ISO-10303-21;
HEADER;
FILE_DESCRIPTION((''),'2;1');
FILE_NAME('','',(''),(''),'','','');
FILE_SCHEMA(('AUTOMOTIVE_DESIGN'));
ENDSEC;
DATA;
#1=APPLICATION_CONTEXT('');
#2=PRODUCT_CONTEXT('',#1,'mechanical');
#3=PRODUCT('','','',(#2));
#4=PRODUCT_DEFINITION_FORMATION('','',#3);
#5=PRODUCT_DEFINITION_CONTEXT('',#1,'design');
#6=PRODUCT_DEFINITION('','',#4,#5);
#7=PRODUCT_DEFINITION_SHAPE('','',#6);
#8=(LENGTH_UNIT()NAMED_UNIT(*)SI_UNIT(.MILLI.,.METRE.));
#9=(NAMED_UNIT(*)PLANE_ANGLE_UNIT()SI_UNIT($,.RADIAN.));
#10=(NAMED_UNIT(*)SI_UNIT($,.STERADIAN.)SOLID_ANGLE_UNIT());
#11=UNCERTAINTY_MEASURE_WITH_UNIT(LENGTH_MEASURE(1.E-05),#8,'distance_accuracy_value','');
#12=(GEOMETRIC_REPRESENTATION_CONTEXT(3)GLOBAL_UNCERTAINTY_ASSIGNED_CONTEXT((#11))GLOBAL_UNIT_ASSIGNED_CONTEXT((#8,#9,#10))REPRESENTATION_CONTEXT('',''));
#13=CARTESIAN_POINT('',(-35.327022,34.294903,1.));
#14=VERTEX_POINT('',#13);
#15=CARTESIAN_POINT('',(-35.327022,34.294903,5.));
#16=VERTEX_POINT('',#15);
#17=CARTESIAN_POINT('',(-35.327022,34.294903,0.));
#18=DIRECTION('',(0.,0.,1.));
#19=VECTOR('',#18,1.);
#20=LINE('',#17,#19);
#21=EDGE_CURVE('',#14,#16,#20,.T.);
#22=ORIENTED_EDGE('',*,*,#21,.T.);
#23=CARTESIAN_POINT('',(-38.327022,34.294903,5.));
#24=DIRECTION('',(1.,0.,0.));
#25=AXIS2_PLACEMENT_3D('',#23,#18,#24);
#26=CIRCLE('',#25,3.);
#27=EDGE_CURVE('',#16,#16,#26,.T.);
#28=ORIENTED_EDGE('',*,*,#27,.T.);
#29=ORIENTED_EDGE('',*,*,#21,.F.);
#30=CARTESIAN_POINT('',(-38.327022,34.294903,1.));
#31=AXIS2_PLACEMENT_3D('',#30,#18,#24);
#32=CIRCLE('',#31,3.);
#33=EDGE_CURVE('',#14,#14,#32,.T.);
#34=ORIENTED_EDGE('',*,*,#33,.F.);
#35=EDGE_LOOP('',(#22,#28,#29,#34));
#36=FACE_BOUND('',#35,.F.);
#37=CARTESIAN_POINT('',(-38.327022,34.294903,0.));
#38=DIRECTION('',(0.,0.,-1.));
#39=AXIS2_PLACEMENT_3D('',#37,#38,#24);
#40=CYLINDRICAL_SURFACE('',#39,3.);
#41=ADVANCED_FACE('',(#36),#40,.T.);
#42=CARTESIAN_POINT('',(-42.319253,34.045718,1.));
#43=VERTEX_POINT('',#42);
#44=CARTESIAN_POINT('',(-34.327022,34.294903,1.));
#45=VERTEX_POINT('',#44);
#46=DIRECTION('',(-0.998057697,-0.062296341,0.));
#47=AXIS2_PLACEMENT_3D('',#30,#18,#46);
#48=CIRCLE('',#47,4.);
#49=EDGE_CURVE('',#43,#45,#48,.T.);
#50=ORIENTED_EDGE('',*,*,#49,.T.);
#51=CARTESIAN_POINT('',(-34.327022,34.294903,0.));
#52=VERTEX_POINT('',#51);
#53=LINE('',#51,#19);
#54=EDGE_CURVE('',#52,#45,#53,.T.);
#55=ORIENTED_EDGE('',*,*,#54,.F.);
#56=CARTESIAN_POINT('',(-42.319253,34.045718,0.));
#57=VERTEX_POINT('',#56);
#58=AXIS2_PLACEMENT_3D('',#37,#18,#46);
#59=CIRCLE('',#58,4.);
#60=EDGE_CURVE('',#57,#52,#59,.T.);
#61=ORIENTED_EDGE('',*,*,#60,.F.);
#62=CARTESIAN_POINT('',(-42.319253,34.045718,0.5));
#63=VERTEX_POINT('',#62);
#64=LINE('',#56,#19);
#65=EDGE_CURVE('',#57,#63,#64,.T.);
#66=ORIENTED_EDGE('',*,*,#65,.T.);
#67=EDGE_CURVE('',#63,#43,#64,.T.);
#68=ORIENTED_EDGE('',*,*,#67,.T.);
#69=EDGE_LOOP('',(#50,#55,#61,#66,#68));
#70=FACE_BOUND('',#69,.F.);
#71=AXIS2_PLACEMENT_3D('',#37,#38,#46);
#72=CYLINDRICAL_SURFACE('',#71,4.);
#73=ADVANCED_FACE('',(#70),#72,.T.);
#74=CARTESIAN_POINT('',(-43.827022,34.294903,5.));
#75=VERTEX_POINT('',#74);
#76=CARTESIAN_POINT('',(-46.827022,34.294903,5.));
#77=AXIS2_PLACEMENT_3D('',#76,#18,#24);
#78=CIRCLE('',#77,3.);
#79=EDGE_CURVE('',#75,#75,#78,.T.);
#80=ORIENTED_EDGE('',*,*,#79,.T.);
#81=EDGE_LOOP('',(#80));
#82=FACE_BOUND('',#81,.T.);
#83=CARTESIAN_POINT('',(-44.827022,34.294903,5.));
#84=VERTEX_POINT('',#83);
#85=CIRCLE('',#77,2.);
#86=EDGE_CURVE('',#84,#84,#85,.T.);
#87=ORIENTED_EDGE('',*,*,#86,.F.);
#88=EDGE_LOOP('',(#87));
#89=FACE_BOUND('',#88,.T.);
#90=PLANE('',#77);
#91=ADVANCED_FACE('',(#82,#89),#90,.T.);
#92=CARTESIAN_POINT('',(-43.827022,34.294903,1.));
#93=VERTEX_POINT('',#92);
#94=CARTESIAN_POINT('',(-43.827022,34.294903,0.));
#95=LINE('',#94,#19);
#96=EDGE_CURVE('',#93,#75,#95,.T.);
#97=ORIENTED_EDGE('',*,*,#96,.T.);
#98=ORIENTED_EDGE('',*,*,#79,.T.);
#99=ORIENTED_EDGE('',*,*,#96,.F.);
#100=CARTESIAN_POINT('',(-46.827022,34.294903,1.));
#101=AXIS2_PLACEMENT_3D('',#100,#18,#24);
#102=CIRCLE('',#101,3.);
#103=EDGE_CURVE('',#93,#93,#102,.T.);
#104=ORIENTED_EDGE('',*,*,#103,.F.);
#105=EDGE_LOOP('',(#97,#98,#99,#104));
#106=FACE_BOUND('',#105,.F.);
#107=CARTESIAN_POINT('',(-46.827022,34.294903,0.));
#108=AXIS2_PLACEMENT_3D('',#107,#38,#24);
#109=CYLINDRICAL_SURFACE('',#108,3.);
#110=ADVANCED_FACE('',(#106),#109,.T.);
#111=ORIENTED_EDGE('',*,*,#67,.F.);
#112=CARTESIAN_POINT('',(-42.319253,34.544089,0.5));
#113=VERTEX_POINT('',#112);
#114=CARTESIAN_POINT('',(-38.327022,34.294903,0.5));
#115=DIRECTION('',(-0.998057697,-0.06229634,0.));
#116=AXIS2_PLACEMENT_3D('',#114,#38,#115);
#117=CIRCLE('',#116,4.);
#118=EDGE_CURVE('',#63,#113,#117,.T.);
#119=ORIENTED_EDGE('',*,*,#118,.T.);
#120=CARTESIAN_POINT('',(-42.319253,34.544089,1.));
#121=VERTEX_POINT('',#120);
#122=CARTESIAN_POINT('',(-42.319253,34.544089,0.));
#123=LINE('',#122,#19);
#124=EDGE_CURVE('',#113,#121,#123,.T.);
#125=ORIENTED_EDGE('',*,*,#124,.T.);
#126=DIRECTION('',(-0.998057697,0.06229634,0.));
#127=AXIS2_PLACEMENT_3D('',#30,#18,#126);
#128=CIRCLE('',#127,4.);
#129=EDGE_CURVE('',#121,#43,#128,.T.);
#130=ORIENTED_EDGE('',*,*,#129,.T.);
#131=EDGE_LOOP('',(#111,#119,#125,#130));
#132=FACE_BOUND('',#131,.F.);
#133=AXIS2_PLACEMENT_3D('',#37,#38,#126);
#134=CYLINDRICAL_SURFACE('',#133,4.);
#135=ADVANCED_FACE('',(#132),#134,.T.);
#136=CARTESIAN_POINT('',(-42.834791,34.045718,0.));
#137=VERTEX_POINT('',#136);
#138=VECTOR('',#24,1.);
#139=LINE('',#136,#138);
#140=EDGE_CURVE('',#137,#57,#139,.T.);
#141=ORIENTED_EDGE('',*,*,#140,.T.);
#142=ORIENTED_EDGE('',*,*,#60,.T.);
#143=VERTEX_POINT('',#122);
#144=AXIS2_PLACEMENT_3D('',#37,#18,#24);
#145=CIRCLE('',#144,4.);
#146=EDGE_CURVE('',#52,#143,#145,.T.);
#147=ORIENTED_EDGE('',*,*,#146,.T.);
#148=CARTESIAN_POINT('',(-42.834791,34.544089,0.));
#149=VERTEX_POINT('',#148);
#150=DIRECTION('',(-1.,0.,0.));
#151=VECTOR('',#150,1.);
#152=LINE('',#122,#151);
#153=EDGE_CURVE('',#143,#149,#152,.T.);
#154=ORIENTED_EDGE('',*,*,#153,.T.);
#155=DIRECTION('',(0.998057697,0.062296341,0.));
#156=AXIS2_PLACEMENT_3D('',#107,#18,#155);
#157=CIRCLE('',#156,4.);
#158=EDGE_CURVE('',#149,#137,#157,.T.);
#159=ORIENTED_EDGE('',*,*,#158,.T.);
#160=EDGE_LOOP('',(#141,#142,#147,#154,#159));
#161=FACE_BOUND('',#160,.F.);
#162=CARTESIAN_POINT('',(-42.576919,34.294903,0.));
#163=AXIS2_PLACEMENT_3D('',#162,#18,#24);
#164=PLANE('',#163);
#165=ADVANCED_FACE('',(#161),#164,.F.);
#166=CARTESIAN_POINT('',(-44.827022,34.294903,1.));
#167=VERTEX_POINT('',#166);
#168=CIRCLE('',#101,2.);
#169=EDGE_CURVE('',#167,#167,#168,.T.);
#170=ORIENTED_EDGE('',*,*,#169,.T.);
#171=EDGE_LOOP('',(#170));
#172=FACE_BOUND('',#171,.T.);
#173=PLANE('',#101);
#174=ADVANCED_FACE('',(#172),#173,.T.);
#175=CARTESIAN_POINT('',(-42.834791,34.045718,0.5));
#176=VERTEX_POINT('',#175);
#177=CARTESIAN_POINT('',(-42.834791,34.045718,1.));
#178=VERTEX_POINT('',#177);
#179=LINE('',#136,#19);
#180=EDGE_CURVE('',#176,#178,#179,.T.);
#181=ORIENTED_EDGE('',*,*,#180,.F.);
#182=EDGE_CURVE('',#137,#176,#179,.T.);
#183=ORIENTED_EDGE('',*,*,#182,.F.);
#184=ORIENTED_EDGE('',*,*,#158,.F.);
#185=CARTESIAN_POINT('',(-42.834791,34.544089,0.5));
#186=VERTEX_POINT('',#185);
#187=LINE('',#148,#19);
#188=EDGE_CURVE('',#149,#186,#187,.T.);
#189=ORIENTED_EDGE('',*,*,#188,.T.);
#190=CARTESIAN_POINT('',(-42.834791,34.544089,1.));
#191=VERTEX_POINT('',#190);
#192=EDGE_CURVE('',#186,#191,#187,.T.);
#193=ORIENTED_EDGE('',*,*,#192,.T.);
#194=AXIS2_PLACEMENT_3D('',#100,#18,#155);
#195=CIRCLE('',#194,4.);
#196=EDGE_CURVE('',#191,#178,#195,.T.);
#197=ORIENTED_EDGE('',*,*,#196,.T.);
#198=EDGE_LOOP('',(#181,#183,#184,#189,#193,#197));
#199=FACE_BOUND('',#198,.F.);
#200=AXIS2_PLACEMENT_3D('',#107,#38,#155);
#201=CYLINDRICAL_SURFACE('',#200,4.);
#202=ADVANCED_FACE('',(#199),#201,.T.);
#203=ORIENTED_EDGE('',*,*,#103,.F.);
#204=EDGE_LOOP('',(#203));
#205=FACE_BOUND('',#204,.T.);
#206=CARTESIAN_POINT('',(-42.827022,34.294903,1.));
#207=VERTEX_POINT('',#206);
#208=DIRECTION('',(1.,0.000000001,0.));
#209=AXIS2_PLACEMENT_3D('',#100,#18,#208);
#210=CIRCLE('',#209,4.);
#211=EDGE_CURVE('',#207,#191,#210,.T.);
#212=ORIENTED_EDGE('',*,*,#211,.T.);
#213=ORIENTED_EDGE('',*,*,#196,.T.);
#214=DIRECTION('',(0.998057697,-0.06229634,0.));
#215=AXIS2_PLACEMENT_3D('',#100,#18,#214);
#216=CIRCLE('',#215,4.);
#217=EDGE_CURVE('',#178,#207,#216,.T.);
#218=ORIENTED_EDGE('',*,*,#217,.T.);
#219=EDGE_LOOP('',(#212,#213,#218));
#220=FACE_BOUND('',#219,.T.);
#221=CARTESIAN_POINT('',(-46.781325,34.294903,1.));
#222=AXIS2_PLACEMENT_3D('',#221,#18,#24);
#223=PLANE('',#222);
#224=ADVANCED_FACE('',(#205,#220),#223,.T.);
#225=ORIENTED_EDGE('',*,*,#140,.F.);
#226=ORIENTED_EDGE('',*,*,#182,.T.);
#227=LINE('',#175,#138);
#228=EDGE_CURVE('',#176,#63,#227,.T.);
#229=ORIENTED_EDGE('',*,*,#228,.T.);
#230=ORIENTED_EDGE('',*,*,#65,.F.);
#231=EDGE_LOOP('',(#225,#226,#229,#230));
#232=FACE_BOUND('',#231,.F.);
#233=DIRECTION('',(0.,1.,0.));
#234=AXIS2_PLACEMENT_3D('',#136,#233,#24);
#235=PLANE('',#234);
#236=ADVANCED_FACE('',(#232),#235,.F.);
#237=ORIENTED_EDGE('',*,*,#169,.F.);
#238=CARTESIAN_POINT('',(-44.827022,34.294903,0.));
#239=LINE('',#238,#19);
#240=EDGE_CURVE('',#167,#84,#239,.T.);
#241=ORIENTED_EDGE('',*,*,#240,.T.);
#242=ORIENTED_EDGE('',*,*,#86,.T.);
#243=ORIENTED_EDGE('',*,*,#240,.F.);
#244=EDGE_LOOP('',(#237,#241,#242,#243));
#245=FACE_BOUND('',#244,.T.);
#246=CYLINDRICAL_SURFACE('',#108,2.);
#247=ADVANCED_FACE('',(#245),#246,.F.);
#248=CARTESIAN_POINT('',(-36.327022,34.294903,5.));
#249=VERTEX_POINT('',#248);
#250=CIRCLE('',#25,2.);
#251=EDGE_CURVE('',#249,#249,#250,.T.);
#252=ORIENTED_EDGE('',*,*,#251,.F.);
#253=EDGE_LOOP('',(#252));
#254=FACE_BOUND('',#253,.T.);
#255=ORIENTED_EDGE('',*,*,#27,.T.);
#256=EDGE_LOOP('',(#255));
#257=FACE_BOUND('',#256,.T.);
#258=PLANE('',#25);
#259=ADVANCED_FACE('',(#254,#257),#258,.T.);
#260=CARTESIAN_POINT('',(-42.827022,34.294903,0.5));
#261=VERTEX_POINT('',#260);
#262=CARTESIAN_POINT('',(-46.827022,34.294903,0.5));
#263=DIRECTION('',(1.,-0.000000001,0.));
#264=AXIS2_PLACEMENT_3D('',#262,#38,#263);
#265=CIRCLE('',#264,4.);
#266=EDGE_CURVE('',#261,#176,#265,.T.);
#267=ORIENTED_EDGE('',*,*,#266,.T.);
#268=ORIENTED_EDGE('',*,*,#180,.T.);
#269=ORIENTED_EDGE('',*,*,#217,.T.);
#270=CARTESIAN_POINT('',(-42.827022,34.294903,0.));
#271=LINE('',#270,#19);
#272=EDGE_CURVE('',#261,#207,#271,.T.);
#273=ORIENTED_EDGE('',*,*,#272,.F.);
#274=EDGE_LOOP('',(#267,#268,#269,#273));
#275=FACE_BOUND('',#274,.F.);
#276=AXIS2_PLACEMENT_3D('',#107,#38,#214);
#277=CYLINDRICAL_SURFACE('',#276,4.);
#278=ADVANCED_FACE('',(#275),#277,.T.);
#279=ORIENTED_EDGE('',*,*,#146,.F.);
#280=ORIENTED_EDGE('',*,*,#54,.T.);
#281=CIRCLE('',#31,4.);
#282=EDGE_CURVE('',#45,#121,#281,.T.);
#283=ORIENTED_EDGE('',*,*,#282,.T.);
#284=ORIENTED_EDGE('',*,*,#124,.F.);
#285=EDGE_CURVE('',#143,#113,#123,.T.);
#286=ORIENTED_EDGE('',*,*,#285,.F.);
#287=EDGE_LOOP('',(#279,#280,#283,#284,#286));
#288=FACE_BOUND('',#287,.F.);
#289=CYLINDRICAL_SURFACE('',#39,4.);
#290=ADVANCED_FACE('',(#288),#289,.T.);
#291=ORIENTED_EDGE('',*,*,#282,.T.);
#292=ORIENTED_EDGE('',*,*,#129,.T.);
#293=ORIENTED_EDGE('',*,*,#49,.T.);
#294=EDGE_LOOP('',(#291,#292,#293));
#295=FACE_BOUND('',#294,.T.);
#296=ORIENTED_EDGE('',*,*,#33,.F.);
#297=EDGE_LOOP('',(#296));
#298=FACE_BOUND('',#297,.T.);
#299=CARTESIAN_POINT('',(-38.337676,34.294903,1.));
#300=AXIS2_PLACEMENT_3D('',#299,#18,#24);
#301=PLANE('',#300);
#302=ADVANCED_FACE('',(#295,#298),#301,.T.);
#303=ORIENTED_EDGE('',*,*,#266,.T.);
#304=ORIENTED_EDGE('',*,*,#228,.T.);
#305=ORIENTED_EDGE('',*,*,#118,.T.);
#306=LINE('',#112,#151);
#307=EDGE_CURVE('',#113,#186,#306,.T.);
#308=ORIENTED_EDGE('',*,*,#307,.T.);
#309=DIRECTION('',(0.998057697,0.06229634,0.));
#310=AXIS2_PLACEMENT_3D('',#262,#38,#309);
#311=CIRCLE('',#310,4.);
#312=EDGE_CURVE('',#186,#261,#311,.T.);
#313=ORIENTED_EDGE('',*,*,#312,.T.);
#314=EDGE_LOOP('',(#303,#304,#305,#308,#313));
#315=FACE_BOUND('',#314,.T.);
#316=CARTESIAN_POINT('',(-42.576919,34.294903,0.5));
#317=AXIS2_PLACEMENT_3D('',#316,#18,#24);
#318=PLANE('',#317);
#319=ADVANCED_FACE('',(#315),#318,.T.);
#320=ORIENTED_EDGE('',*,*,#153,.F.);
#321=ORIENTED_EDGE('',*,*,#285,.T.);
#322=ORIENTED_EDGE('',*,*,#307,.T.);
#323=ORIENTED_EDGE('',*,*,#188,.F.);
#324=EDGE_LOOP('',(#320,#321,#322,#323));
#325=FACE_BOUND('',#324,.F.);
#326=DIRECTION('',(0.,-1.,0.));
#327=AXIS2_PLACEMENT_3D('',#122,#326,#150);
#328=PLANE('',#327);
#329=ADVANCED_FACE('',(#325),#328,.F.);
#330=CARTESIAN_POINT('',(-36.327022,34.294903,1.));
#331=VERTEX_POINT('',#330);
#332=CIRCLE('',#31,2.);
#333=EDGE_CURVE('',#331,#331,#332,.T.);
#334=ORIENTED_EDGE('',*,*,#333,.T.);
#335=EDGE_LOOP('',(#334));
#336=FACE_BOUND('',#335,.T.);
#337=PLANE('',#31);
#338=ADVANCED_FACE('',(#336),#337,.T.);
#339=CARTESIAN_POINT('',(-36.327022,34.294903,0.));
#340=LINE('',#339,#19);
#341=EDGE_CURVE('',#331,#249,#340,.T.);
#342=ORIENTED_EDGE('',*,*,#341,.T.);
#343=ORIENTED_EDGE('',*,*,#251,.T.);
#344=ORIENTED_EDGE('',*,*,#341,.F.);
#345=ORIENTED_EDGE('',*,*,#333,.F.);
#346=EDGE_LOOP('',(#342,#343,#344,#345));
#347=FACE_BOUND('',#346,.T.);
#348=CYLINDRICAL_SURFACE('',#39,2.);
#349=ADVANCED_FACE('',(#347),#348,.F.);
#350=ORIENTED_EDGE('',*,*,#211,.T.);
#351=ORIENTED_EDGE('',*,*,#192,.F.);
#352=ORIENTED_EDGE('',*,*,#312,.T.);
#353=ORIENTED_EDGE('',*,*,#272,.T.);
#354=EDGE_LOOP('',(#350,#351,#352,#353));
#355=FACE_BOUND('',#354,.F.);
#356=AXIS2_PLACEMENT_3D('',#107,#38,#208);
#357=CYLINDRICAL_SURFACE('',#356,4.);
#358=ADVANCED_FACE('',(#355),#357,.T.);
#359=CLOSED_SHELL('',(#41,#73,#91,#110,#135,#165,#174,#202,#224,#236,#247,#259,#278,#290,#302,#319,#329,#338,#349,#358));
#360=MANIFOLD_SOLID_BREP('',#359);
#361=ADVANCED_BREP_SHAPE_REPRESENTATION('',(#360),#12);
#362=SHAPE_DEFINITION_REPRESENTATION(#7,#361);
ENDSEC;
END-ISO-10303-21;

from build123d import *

# Parameters (mm, degrees)
F0_R     = 3
F0_R_2   = 2
F1_DEPTH = 5
F2_DEPTH = 1
F3_DEPTH = 0.5


# Not quite as in the source:
# - a feature names something its author has since deleted; it is built from what else it names


with BuildPart() as f1:
    # F0 (on Top) → F1 (new body)
    with BuildSketch(Plane.XY):
        with Locations((-46.8270219862, 34.2949032784)):
            Circle(F0_R)
        with Locations((-46.8270219862, 34.2949032784)):
            Circle(F0_R_2, mode=Mode.SUBTRACT)
    extrude(amount=F1_DEPTH)

    # F0 (on Top) → F2 (join)
    with BuildSketch(Plane.XY):
        with BuildLine():
            ThreePointArc((-42.8347911995, 34.0457179145), (-42.8289647614, 34.1702500531), (-42.8270219862, 34.2949032784))
            ThreePointArc((-42.8270219862, 34.2949032784), (-42.8289647614, 34.4195565036), (-42.8347911995, 34.5440886422))
            ThreePointArc((-42.8347911995, 34.5440886422), (-50.8270219862, 34.2949032784), (-42.8347911995, 34.0457179145))
        make_face()
        with Locations((-46.8270219862, 34.2949032784)):
            Circle(F0_R, mode=Mode.SUBTRACT)
        with Locations((-46.8270219862, 34.2949032784)):
            Circle(F0_R_2)
    extrude(amount=F2_DEPTH)



with BuildPart() as f1b:
    # F0 (on Top) → F1, piece 2 (new body)
    with BuildSketch(Plane.XY):
        with Locations((-38.3270219862, 34.2949032784)):
            Circle(F0_R)
        with Locations((-38.3270219862, 34.2949032784)):
            Circle(F0_R_2, mode=Mode.SUBTRACT)
    extrude(amount=F1_DEPTH)

    # F0 (on Top) → F2, piece 2 (join)
    with BuildSketch(Plane.XY):
        with BuildLine():
            ThreePointArc((-34.3270219862, 34.2949032784), (-38.202368761, 38.2929605032), (-42.319252773, 34.5440886422))
            ThreePointArc((-42.319252773, 34.5440886422), (-42.3270219862, 34.2949032784), (-42.319252773, 34.0457179145))
            ThreePointArc((-42.319252773, 34.0457179145), (-38.202368761, 30.2968460535), (-34.3270219862, 34.2949032784))
        make_face()
        with Locations((-38.3270219862, 34.2949032784)):
            Circle(F0_R, mode=Mode.SUBTRACT)
        with Locations((-38.3270219862, 34.2949032784)):
            Circle(F0_R_2)
    extrude(amount=F2_DEPTH)


with BuildPart() as f1_1:
    add(f1.part)

    add(f1b.part)  # F3 merges F1b
    # F0 (on Top) → F3 (join)
    with BuildSketch(Plane.XY):
        with BuildLine():
            ThreePointArc((-42.8347911995, 34.5440886422), (-42.8289647614, 34.4195565036), (-42.8270219862, 34.2949032784))
            ThreePointArc((-42.8270219862, 34.2949032784), (-42.8289647614, 34.1702500531), (-42.8347911995, 34.0457179145))
            Line((-42.8347911995, 34.0457179145), (-42.319252773, 34.0457179145))
            ThreePointArc((-42.319252773, 34.0457179145), (-42.3270219862, 34.2949032784), (-42.319252773, 34.5440886422))
            Line((-42.319252773, 34.5440886422), (-42.8347911995, 34.5440886422))
        make_face()
    extrude(amount=F3_DEPTH)


solid = f1_1.part
